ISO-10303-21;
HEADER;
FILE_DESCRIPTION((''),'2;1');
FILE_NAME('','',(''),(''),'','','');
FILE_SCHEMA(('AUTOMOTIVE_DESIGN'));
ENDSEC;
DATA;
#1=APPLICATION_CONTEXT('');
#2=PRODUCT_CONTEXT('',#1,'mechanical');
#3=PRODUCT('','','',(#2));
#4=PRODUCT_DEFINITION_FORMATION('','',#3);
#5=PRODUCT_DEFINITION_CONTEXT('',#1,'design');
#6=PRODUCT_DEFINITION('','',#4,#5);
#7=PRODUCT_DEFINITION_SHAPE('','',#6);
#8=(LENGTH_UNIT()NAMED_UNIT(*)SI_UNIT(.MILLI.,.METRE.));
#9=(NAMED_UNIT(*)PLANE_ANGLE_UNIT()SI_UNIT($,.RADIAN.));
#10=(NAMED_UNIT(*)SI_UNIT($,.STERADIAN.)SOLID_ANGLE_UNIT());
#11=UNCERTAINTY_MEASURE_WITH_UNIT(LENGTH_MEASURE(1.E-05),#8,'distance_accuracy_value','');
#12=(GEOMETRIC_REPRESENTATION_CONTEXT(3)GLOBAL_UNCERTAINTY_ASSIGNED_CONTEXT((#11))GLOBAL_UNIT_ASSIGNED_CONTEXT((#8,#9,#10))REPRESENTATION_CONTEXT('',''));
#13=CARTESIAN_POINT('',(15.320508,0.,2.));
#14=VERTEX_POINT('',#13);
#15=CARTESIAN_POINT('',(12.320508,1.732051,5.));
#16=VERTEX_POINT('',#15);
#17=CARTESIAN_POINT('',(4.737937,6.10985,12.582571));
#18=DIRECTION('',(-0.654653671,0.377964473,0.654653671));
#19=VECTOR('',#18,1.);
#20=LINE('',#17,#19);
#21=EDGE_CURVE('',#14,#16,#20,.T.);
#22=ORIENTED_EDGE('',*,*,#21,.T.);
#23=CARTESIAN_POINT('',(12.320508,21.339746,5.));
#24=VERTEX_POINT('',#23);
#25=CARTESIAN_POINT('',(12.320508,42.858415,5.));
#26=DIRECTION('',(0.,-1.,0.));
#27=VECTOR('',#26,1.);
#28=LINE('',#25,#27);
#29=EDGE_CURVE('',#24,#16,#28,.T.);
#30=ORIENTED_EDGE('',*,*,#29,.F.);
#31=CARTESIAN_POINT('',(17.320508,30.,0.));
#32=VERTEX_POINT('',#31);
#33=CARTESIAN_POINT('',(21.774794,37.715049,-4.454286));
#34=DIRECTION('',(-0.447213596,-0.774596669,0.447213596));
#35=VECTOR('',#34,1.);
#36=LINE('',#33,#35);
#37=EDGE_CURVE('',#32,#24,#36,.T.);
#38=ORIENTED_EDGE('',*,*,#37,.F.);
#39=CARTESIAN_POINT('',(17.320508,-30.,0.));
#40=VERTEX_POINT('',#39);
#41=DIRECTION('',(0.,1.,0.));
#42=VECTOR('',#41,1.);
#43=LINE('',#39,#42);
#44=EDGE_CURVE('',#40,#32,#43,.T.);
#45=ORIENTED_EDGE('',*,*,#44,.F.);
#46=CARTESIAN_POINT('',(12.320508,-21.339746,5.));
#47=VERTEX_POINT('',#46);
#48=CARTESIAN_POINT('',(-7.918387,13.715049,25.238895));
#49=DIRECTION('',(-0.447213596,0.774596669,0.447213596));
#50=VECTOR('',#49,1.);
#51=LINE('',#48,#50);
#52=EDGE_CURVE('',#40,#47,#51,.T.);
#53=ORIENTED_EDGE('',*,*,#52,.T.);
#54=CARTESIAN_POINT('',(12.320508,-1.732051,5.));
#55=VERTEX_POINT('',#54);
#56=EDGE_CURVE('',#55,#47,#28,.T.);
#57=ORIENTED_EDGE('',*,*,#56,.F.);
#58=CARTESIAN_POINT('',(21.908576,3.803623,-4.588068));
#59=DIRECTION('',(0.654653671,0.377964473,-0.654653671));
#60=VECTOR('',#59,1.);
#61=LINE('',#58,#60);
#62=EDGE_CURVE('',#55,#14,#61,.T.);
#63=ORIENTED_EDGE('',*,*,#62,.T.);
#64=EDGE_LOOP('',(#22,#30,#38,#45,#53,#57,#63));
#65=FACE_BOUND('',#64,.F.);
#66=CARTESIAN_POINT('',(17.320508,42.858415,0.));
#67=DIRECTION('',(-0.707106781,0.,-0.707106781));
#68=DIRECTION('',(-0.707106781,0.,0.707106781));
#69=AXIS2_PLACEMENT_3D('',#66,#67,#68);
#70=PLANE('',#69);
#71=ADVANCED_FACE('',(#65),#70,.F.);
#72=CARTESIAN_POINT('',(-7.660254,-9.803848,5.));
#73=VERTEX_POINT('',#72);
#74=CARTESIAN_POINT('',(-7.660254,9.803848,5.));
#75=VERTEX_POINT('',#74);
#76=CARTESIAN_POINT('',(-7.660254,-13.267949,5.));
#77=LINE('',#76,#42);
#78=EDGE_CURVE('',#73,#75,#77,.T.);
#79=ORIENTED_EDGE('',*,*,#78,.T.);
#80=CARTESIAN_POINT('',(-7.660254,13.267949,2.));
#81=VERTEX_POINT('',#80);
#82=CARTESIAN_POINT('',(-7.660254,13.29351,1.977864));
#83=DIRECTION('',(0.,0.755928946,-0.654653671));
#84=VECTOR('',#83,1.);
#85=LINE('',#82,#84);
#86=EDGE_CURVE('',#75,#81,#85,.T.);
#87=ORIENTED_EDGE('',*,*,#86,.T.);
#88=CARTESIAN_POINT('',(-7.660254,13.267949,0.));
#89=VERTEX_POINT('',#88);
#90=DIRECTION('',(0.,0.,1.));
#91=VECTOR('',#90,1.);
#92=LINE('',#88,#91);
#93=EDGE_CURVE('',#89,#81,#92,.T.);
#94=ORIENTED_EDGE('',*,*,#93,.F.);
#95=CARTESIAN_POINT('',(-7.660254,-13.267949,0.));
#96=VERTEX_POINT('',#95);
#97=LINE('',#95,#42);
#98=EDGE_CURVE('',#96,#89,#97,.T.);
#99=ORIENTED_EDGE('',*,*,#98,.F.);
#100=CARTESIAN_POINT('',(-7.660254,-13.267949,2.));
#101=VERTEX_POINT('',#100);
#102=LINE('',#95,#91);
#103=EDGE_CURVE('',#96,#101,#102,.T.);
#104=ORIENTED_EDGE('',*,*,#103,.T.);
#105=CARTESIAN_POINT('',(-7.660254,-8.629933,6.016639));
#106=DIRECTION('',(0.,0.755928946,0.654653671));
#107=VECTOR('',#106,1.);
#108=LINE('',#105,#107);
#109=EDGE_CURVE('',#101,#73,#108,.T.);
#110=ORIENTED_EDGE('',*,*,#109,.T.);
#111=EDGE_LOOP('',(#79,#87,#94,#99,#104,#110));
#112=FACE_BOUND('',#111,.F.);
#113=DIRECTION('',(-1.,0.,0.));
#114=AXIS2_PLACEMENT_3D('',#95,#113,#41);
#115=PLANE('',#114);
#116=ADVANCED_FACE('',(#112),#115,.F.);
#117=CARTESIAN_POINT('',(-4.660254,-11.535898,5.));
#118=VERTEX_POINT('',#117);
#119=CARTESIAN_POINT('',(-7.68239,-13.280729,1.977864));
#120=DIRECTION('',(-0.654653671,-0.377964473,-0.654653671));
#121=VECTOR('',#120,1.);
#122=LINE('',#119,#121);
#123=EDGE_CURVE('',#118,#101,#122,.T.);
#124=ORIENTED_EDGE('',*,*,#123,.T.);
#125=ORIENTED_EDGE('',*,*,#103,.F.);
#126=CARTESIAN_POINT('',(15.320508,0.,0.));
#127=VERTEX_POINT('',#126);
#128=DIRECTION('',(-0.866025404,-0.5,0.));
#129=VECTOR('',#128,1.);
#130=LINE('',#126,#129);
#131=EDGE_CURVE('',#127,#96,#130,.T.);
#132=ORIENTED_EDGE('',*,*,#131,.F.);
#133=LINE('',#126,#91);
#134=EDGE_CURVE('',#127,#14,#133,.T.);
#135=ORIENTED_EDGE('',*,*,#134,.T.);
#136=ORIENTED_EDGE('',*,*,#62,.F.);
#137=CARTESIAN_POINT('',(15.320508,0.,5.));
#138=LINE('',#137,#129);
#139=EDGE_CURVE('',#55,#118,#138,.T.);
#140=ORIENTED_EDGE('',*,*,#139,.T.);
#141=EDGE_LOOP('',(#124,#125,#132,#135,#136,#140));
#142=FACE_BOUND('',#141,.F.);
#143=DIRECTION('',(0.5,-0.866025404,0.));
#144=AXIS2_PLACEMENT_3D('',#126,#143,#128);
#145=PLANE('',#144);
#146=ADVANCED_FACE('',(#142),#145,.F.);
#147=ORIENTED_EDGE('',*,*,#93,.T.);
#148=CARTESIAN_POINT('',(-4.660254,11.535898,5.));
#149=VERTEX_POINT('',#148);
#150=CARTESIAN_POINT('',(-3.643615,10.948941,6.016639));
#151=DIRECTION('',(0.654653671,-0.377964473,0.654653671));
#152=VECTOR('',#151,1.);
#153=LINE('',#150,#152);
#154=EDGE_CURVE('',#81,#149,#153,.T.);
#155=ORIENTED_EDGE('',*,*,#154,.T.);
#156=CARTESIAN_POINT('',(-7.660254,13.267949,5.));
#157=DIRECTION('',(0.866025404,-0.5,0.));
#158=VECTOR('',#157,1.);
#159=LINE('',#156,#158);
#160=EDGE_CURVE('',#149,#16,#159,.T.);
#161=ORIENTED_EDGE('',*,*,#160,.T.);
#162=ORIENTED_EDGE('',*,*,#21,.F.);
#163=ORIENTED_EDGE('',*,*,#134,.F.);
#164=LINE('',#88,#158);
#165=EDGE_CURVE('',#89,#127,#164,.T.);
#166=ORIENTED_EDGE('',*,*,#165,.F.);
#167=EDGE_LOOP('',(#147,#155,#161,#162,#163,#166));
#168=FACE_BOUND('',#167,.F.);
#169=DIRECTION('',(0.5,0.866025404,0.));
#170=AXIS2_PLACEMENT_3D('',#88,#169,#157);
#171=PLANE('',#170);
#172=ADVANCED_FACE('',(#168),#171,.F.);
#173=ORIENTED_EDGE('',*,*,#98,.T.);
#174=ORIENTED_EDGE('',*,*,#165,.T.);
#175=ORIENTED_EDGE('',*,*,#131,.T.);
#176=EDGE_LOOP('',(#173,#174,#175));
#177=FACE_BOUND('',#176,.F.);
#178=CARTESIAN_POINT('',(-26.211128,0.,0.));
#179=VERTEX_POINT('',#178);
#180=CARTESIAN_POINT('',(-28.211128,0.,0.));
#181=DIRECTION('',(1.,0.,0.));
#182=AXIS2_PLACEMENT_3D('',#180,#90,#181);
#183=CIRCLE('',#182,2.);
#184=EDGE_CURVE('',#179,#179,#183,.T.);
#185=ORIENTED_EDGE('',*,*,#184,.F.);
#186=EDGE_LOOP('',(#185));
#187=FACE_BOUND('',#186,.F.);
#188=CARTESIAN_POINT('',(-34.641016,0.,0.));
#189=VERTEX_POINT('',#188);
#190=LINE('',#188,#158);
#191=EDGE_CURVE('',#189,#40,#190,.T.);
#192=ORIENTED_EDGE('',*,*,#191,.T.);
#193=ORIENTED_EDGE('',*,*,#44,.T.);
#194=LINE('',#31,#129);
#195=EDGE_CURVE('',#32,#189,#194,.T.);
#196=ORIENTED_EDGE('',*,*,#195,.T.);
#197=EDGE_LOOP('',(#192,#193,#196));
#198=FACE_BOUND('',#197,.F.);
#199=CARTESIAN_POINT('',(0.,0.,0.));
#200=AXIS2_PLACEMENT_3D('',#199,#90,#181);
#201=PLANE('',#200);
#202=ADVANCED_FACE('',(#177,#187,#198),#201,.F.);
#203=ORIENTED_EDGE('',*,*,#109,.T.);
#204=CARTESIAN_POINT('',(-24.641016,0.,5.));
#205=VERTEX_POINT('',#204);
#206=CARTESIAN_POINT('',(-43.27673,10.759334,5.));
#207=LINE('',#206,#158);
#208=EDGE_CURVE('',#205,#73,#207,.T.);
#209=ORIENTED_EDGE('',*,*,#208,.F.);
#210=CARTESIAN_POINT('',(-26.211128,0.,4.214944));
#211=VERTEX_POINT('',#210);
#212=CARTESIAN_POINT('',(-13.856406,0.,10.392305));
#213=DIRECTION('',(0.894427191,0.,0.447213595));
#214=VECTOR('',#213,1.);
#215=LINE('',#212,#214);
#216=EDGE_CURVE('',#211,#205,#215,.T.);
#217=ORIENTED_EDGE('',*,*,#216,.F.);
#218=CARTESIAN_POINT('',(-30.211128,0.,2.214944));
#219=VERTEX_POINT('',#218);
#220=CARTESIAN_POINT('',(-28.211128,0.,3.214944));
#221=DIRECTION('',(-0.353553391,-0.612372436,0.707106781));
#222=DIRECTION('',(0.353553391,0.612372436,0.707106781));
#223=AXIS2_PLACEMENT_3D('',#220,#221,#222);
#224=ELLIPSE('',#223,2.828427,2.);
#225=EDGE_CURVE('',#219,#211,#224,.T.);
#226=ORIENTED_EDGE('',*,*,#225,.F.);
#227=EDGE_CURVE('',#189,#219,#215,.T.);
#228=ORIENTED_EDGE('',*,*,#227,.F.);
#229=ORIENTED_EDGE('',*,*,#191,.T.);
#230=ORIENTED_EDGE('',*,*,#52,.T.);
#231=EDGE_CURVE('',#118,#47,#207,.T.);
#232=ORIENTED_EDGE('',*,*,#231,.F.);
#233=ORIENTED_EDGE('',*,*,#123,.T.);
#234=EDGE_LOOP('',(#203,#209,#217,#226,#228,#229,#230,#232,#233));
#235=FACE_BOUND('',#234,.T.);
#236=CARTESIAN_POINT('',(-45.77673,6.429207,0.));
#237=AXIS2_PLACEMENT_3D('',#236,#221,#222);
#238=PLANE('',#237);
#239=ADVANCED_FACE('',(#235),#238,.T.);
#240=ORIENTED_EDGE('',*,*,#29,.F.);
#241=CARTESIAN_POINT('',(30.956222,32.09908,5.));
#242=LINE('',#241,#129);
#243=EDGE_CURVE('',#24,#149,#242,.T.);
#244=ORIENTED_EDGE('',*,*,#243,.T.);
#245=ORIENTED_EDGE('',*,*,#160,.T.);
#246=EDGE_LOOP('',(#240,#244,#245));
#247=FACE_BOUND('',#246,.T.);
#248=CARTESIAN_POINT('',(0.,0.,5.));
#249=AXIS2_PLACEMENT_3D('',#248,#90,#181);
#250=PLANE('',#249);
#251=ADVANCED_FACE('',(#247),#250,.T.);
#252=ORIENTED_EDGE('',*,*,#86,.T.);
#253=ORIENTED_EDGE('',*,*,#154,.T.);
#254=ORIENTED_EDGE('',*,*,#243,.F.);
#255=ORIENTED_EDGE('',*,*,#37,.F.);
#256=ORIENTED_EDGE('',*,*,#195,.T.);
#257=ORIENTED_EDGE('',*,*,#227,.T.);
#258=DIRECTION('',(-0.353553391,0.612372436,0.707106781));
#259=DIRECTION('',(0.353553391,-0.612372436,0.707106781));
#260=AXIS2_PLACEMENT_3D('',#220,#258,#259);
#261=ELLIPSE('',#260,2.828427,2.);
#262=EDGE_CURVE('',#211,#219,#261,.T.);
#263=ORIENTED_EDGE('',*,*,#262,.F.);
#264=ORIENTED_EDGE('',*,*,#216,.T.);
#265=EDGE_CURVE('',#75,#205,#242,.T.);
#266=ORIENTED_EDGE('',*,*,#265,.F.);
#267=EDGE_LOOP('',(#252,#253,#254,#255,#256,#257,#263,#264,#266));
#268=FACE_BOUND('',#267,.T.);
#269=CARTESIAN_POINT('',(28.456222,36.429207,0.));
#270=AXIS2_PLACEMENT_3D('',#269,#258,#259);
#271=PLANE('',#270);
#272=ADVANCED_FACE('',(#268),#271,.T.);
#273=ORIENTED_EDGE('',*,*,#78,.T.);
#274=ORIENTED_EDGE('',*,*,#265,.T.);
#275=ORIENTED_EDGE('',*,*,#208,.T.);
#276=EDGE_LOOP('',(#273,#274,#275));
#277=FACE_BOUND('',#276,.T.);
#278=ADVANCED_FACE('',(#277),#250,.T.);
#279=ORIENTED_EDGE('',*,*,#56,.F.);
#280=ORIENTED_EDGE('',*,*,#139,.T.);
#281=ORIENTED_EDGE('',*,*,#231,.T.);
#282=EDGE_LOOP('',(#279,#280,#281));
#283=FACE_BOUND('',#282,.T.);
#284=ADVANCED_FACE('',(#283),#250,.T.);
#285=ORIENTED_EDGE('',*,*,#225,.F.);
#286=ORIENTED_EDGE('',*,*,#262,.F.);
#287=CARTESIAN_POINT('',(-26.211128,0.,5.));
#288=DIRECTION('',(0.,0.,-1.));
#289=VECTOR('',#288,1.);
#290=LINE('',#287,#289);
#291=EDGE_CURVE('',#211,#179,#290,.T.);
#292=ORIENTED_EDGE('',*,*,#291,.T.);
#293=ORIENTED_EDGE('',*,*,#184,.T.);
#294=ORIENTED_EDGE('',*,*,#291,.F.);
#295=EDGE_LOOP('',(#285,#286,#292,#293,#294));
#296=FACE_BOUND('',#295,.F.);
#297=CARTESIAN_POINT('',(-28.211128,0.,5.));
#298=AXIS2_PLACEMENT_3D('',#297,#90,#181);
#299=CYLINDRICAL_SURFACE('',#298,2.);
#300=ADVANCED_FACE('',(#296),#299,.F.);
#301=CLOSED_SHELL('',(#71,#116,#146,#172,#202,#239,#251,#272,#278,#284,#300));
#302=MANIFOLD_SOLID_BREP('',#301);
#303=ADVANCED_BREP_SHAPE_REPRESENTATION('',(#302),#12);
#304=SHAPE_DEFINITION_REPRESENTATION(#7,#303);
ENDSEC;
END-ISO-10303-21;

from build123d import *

# Parameters (mm, degrees)
F1_DEPTH    = 5
F2_R        = 2
F3_DEPTH    = 25
F4_T1_DEPTH = 85.7168298797
F4_T3_DEPTH = 85.7168298797
F4_T5_DEPTH = 85.7168298797


# Not quite as in the source:
# - a fillet or chamfer that OpenCascade refuses, or shapes differently, is made with other operations: its cross-section is extruded or revolved along the edge and cut away or added


with BuildPart() as f1:
    # F0 (on Top) → F1 (new body)
    with BuildSketch(Plane.XY):
        Polygon((17.3205080757, -30), (17.3205080757, 30), (-34.6410161514, 0), align=None)
        Polygon((-7.6602540378, -13.2679491924), (-7.6602540378, 13.2679491924), (15.3205080757, 0), align=None, mode=Mode.SUBTRACT)
    extrude(amount=F1_DEPTH)

    # F2 (on face) → F3 (cut)
    with BuildSketch(Plane.XY.offset(5)):
        with Locations((-28.2111279666, 0)):
            Circle(F2_R)
    extrude(amount=-F3_DEPTH, mode=Mode.SUBTRACT)

    # F4: chamfer of 5 on 3 edges, made by hand

    # F4_s2 → F4_t1 (cut)
    with BuildSketch(Plane(origin=(37.1164761038, 21.4292074699, 0), x_dir=(0, 0, 1), z_dir=(-0.8660254038, -0.5, 0))):
        Polygon((0, 17.3205080757), (5, 12.3205080757), (5, 17.3205080757), align=None)
    extrude(amount=F4_T1_DEPTH, mode=Mode.SUBTRACT)

    # F4_s4 → F4_t3 (cut)
    with BuildSketch(Plane.XZ.offset(-42.8584149398)):
        Polygon((17.3205080757, 0), (12.3205080757, 5), (17.3205080757, 5), align=None)
    extrude(amount=F4_T3_DEPTH, mode=Mode.SUBTRACT)

    # F4_s6 → F4_t5 (cut)
    with BuildSketch(Plane(origin=(-37.1164761038, 21.4292074699, 0), x_dir=(0, 0, 1), z_dir=(0.8660254038, -0.5, 0))):
        Polygon((0, 17.3205080757), (5, 12.3205080757), (5, 17.3205080757), align=None)
    extrude(amount=F4_T5_DEPTH, mode=Mode.SUBTRACT)


solid = f1.part
